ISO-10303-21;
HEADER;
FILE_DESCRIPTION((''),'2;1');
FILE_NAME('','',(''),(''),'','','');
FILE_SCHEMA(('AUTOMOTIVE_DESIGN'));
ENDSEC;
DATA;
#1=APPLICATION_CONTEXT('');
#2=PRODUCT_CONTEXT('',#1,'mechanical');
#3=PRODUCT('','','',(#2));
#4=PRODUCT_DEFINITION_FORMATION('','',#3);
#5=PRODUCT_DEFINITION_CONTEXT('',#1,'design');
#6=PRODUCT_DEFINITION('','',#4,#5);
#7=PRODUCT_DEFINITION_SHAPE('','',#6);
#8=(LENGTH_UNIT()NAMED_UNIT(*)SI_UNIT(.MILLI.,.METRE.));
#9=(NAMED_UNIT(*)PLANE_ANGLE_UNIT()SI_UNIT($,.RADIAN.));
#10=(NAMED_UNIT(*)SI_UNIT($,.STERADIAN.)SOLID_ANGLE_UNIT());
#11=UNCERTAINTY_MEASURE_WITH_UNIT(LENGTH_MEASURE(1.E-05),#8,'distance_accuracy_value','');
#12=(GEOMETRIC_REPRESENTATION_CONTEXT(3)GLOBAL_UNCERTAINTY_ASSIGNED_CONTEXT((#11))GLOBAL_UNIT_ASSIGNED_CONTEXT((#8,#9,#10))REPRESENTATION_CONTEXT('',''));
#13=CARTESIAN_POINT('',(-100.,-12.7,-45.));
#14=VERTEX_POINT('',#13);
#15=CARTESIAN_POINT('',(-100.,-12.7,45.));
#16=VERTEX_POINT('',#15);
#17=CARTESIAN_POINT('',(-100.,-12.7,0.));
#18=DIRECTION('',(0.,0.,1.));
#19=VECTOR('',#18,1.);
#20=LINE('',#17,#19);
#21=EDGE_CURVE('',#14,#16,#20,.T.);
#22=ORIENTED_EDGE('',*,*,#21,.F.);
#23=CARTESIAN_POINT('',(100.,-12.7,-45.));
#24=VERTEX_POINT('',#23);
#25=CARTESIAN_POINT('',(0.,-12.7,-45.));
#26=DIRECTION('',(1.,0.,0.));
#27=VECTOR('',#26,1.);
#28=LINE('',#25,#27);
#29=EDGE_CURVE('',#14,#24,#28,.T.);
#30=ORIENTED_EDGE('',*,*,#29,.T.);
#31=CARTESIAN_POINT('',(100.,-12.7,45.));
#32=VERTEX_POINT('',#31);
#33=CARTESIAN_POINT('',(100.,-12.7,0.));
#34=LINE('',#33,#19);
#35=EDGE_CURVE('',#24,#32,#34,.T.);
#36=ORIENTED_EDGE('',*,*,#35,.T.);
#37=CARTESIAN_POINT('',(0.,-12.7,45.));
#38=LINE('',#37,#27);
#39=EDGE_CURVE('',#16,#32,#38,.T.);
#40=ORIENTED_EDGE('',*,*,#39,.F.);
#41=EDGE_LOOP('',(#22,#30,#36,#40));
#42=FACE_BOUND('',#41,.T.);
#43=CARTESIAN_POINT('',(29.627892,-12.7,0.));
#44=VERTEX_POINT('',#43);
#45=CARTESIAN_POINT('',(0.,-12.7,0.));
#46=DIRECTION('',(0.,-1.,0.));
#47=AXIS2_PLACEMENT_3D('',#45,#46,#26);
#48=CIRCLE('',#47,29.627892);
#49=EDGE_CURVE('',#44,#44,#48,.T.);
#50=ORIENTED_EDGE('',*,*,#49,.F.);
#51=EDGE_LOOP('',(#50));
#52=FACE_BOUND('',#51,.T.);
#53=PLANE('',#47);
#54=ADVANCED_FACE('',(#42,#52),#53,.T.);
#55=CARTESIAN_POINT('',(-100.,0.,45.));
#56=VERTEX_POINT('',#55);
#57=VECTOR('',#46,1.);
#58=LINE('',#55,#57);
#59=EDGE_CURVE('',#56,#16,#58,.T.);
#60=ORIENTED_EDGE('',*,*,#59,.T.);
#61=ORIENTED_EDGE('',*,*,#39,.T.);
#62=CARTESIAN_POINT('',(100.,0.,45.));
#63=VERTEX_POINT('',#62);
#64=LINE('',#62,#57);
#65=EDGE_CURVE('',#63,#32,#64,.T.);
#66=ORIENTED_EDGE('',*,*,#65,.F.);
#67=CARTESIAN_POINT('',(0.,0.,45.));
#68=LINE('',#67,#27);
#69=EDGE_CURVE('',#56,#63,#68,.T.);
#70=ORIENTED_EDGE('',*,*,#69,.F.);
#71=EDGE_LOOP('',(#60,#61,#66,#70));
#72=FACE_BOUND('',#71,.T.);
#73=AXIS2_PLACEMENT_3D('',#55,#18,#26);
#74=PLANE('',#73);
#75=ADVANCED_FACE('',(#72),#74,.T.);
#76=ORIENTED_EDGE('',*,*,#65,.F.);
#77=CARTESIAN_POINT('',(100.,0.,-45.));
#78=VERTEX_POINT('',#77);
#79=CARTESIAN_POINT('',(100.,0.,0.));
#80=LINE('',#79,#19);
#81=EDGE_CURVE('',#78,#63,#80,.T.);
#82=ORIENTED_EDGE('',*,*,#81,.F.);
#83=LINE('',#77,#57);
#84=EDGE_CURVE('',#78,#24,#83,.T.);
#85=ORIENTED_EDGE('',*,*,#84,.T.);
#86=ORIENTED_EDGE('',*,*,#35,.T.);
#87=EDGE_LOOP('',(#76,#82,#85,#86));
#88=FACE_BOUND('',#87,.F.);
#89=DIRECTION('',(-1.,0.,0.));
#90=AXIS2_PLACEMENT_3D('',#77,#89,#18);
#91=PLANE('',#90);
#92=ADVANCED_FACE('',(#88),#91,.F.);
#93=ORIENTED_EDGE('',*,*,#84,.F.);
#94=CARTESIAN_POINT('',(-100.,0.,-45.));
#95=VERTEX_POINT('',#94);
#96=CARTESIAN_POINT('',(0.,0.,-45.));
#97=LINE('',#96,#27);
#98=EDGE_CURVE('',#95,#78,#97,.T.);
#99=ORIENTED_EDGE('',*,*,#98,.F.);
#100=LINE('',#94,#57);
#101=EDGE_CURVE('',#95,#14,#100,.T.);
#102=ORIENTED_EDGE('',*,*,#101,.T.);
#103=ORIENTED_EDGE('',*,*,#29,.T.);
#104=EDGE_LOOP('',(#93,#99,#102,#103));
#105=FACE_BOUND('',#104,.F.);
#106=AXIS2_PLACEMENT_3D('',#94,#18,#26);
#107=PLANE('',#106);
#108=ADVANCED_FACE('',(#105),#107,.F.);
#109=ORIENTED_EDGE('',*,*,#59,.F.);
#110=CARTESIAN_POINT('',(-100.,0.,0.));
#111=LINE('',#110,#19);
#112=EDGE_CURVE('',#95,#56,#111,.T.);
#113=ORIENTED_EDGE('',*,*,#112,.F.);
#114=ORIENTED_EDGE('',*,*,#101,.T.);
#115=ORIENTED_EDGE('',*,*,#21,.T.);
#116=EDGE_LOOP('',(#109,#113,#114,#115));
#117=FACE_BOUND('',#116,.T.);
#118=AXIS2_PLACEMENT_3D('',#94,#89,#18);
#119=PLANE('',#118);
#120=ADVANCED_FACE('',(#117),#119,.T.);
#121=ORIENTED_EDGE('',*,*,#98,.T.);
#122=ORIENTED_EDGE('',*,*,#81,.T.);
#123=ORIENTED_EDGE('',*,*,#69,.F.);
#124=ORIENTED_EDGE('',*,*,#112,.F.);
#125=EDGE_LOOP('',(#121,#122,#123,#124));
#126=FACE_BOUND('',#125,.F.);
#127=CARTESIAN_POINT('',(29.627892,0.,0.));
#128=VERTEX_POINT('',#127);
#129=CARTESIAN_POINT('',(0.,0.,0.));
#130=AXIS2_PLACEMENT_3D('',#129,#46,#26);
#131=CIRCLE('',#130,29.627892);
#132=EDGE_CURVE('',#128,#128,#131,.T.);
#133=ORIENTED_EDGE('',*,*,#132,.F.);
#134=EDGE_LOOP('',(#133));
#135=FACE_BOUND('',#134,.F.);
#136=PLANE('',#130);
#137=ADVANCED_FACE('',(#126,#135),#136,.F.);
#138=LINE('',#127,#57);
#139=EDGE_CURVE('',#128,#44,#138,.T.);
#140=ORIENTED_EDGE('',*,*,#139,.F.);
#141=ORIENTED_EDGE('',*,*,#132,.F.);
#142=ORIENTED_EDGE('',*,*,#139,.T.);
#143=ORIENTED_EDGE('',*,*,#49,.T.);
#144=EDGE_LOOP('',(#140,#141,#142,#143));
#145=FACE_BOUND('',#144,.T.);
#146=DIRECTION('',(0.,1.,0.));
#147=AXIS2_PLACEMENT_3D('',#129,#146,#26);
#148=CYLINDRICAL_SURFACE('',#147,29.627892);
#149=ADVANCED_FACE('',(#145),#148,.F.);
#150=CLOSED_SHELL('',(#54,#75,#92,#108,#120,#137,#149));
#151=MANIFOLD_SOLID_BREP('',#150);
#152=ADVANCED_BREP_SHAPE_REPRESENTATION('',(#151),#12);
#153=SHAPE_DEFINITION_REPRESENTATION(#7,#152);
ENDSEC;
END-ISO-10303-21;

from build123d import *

# Parameters (mm, degrees)
F0_W     = 200
F0_H     = 90
F0_R     = 29.6278920172
F1_DEPTH = 38.1
F2_DEPTH = 25.4


# Not quite as in the source:
# - a feature names something its author has since deleted; it is built from what else it names


with BuildPart() as f1:
    # F0 (on Front) → F1 (new body)
    with BuildSketch(Plane.XZ):
        Rectangle(F0_W, F0_H)
        Circle(F0_R, mode=Mode.SUBTRACT)
    extrude(amount=F1_DEPTH)

    # F2 (cut): a face of the model
    f2_faces = [f1.faces().sort_by_distance(p)[0] for p in [
        (0, -38.1, -42.8068287801),
    ]]
    extrude(f2_faces, amount=-F2_DEPTH, mode=Mode.SUBTRACT)


solid = f1.part
